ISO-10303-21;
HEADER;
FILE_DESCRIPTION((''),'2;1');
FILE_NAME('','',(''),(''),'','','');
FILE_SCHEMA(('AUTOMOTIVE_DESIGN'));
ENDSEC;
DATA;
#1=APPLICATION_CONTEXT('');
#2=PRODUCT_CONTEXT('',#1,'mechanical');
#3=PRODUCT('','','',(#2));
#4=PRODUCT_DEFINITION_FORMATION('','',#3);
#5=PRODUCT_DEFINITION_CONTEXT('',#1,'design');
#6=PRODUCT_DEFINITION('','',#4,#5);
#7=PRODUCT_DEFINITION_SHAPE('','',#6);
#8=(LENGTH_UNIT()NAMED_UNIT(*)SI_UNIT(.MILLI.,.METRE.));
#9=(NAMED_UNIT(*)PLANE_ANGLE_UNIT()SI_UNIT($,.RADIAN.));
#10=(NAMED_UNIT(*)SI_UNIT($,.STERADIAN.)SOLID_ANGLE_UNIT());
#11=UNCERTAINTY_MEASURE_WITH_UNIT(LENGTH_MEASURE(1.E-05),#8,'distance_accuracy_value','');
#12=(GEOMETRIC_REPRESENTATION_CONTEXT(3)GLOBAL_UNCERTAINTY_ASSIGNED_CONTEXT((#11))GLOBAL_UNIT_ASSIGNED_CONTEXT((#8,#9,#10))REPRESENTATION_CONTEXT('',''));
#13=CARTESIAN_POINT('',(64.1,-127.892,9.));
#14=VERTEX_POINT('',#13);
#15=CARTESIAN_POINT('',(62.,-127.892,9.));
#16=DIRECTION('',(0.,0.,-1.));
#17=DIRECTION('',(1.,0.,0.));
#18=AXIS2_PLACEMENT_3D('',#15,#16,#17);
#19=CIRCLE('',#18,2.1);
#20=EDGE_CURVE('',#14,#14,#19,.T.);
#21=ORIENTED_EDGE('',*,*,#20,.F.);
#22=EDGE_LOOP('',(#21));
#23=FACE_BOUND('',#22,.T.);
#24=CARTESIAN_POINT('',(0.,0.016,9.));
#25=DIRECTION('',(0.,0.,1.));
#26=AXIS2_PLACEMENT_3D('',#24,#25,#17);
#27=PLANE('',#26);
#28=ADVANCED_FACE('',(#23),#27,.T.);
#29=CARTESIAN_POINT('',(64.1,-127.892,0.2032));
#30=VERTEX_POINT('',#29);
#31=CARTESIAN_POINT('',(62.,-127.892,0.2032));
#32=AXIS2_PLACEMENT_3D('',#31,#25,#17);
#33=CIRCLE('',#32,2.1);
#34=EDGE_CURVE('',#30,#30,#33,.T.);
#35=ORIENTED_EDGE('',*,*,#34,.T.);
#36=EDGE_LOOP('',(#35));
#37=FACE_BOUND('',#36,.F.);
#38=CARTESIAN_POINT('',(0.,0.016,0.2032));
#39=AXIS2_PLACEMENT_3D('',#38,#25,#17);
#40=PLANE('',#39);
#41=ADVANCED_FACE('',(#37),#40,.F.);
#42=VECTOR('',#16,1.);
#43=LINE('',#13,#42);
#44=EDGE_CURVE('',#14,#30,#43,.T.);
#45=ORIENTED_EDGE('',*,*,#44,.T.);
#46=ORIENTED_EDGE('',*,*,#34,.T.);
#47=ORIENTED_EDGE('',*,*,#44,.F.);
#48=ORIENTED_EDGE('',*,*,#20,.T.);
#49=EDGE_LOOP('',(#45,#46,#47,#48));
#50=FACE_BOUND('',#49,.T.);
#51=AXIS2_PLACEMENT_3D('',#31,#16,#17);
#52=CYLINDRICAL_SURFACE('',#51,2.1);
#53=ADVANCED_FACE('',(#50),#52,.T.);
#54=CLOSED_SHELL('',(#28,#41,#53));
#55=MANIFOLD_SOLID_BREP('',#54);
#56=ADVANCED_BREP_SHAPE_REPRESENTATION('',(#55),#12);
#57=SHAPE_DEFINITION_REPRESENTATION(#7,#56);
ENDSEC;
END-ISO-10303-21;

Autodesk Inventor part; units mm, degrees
ref_plane "Work Plane1" through (0, 0.016, 0.2032) normal (0, 0, 1) x (1, 0, 0)
sketch "Sketch2" plane through (0, 0.016, 0.2032) normal (0, 0, 1) x (1, 0, 0)
  line L0 (15.65, 1.992) -> (108.35, 1.992) construction
  line L1 (15.65, 22.6862) -> (15.65, 1.992) construction
  line L2 (36.2904, 24.492) -> (15.65, 22.6862)
  line L3 (87.7096, 24.492) -> (36.2904, 24.492)
  line L4 (108.35, 22.6862) -> (87.7096, 24.492)
  line L5 (108.35, 22.6862) -> (108.35, 1.992) construction
  line L6 (51.9, 18.342) -> (72.1, 18.342)
  line L7 (72.1, 18.342) -> (72.1, 10.592)
  line L8 (72.1, 10.592) -> (51.9, 10.592)
  line L9 (51.9, 10.592) -> (51.9, 18.342)
  line L10 (72.5, 10.192) -> (72.5, 18.742)
  line L11 (72.5, 18.742) -> (51.5, 18.742)
  line L12 (51.5, 18.742) -> (51.5, 10.192)
  line L13 (51.5, 10.192) -> (72.5, 10.192)
  line L14 (124, 21.317) -> (124, 2) construction
  line L15 (124, 21.317) -> (108.35, 22.6862)
  line L16 (15.65, 22.6862) -> (0, 21.317)
  line L17 (124.5, 2) -> (124.5, 21.2813)
  line L18 (108.35, 22.6862) -> (124.5, 21.2813)
  line L19 (62, -127.908) -> (62, -8.8814) construction
  line L20 (62, -127.908) -> (193.9823, -51.708)
  line L21 (72.5, 18.742) -> (84.25, 18.742)
  line L22 (84.25, 18.742) -> (84.25, 10.2)
  line L23 (84.25, 10.2) -> (72.5, 10.2)
  line L24 (72.5, 10.2) -> (72.5, 18.742)
  line L25 (124.5, 21.2813) -> (126.4924, 21.1069)
  line L26 (84.25, 18.742) -> (115.25, 18.742)
  line L27 (115.25, 18.742) -> (115.25, 10.2)
  line L28 (115.25, 10.2) -> (84.25, 10.2)
  line L29 (84.25, 10.2) -> (84.25, 18.742)
  arc A0 (193.9823, -51.708) -> (124.5, 11.0866) centre (62, -127.908) ccw construction
  line L30 (62, -127.908) -> (62, 26.7183) construction
  line L31 (62, -127.908) -> (-69.9823, -51.708)
  line L32 (51.5, 18.742) -> (39.75, 18.742)
  line L33 (39.75, 18.742) -> (39.75, 10.2)
  line L34 (39.75, 10.2) -> (51.5, 10.2)
  line L35 (39.75, 18.742) -> (8.75, 18.742)
  line L36 (8.75, 18.742) -> (8.75, 10.2)
  line L37 (8.75, 10.2) -> (39.75, 10.2)
  circle A1 centre (62, -127.908) radius 2.1
  circle A2 centre (62, -127.908) radius 152.4 construction
  point P0 (0, -0.016)
  point P1 (124, 21.325)
  point P2 (108.35, 18.742)
  point P3 (108.35, 10.2)
  point P4 (62, 18.742)
  point P5 (62, 10.192)
  point P6 (60.1813, -126.858)
  point P7 (63.8187, -126.858)
extrude "Extrusion1" add sketch "Sketch2" along normal up to surface (8.7968 mm away) contours L31 A1 L20 | L20 A1 L31
ref_plane "Work Plane6" through (72.1, 10.608, 0) normal (1, 0, 0) x (0, 1, 0)
sketch "Sketch3" plane through (84.25, 10.216, 0.2032) normal (1, 0, 0) x (0, 0, -1)
  circle A0 centre (-4.6468, 4.267) radius 2.25 projected
  point P0 (0.2032, -10.216)
extrude "Extrusion2" [suppressed]
sketch "Sketch6" plane through (84.25, 10.216, 0.2032) normal (1, 0, 0) x (0, 0, -1)
  line L0 (-8.7968, 8.542) -> (-8.7968, 0) projected
  line L1 (0, 0) -> (-8.7968, 0) projected
  line L2 (0, 0) -> (0, 8.542) projected
  line L3 (0, 8.542) -> (-8.7968, 8.542) projected
  circle A0 centre (-4.6468, 4.267) radius 3.25
  point P0 (0.2032, -10.216)
  dimension "d10" = 6.5
extrude "Extrusion3" [suppressed]
ref_plane "Work Plane2" through (62, -0.5, -15.65) normal (0, -1, 0) x (-1, 0, 0)
sketch "Sketch8" plane through (62, -0.5, -15.65) normal (0, -1, 0) x (-1, 0, 0)
  arc A0 (46.35, -15.65) -> (46.35, 15.65) centre (46.35, 0) ccw projected
  arc A1 (-46.35, 15.65) -> (-46.35, -15.65) centre (-46.35, 0) ccw projected
  line L0 (-46.35, 15.65) -> (-25.7096, 15.65) projected
  line L1 (-25.7096, 15.65) -> (25.7096, 15.65) projected
  line L2 (25.7096, 15.65) -> (46.35, 15.65) projected
  line L3 (46.35, -24.65) -> (25.7096, -24.65) projected
  line L4 (25.7096, -15.8532) -> (25.7096, -24.65) projected
  line L5 (25.7096, -15.8532) -> (46.35, -15.8532) projected
  line L6 (102.4953, -24.65) -> (64.4924, -24.65) projected
  line L7 (64.4924, -15.8532) -> (64.4924, -24.65) projected
  line L8 (64.4924, -15.8532) -> (102.4953, -15.8532) projected
  line L9 (102.4953, -15.8532) -> (102.4953, -24.65) projected
  line L10 (-64.4924, -24.65) -> (-102.4516, -24.65) projected
  line L11 (-102.4516, -15.8532) -> (-102.4516, -24.65) projected
  line L12 (-102.4516, -15.8532) -> (-64.4924, -15.8532) projected
  line L13 (-64.4924, -15.8532) -> (-64.4924, -24.65) projected
  line L14 (-53.25, -15.8532) -> (-53.25, -24.65) projected
  line L15 (64.4924, -15.8532) -> (64.4924, -24.65) projected
  line L16 (46.35, -15.8532) -> (46.35, -24.65) projected
  point P0 (62, -15.65)
ref_plane "Work Plane3" through (62, 24.508, -15.65) normal (0, 1, 0) x (1, 0, 0)
ref_plane "Work Plane4" through (15.65, 2.008, -31.3) normal (0, 0, -1) x (0, 1, 0)
ref_plane "Work Plane7" through (62, 10.208, 0.2032) normal (-1, 0, 0) x (0, 0, 1)
sketch "Sketch16" plane through (0, 0.016, 0.2032) normal (0, 0, -1) x (-1, 0, 0)
  circle A0 centre (-62, -127.908) radius 2.1 projected
  circle A1 centre (-62, -127.908) radius 127
  point P0 (0, -0.016)
  dimension "d54" = 254
extrude "Extrusion12" cut sketch "Sketch16" against normal blind 5
sketch "Sketch17" plane through (0, 0.016, 5.2032) normal (0, 0, -1) x (-1, 0, 0)
  line L0 (47.9852, -64.408) -> (-60.1813, -126.858) projected
  arc A0 (47.9852, -64.408) -> (-171.9852, -64.408) centre (-62, -127.908) ccw projected
  line L1 (-63.8187, -126.858) -> (-171.9852, -64.408) projected
  arc A1 (-60.1813, -126.858) -> (-63.8187, -126.858) centre (-62, -127.908) ccw projected
  circle A2 centre (-62, -77.108) radius 2.1
  circle A3 centre (-94.6536, -88.9929) radius 2.1
  circle A4 centre (-112.0282, -119.0867) radius 2.1
  circle A5 centre (-105.9941, -153.308) radius 2.1
  circle A6 centre (-79.3746, -175.6444) radius 2.1
  circle A7 centre (-44.6254, -175.6444) radius 2.1
  circle A8 centre (-18.0059, -153.308) radius 2.1
  circle A9 centre (-11.9718, -119.0867) radius 2.1
  circle A10 centre (-29.3464, -88.9929) radius 2.1
  point P0 (0, -0.016)
  dimension "d57" = 4.2
  dimension "d58" = 50.8
  dimension "d61" = 360
extrude "Extrusion13" [suppressed]
sketch "Sketch19" plane through (62, -127.892, 0.2032) normal (0, 0, -1) x (-1, 0, 0)
  line L0 (228.0966, 68.2385) -> (207.1624, 117.172)
  line L1 (207.1624, 117.172) -> (168.0647, 117.172)
  line L2 (228.0966, 68.2385) -> (242.9784, 68.2385)
  line L3 (242.9784, 68.2385) -> (242.9784, 49.8254)
  line L4 (242.9784, 49.8254) -> (75.3476, -21.8884)
  line L5 (75.3476, -21.8884) -> (-78.3686, -21.8884)
  line L6 (-78.3686, -21.8884) -> (-119.2307, 7.3059)
  line L7 (-119.2307, 7.3059) -> (-119.2307, 117.172)
  line L8 (-119.2307, 117.172) -> (170.5871, 117.172)
  line L9 (-106.1144, 117.172) -> (-119.2307, 107.0826)
  line L10 (207.1624, 117.172) -> (206.5762, 59.0319)
  point P0 (62, 127.892)
  dimension "d76" = 113.162
  dimension "d77" = 23.739
properties part number "Head_CameraPanel_Bottom"
